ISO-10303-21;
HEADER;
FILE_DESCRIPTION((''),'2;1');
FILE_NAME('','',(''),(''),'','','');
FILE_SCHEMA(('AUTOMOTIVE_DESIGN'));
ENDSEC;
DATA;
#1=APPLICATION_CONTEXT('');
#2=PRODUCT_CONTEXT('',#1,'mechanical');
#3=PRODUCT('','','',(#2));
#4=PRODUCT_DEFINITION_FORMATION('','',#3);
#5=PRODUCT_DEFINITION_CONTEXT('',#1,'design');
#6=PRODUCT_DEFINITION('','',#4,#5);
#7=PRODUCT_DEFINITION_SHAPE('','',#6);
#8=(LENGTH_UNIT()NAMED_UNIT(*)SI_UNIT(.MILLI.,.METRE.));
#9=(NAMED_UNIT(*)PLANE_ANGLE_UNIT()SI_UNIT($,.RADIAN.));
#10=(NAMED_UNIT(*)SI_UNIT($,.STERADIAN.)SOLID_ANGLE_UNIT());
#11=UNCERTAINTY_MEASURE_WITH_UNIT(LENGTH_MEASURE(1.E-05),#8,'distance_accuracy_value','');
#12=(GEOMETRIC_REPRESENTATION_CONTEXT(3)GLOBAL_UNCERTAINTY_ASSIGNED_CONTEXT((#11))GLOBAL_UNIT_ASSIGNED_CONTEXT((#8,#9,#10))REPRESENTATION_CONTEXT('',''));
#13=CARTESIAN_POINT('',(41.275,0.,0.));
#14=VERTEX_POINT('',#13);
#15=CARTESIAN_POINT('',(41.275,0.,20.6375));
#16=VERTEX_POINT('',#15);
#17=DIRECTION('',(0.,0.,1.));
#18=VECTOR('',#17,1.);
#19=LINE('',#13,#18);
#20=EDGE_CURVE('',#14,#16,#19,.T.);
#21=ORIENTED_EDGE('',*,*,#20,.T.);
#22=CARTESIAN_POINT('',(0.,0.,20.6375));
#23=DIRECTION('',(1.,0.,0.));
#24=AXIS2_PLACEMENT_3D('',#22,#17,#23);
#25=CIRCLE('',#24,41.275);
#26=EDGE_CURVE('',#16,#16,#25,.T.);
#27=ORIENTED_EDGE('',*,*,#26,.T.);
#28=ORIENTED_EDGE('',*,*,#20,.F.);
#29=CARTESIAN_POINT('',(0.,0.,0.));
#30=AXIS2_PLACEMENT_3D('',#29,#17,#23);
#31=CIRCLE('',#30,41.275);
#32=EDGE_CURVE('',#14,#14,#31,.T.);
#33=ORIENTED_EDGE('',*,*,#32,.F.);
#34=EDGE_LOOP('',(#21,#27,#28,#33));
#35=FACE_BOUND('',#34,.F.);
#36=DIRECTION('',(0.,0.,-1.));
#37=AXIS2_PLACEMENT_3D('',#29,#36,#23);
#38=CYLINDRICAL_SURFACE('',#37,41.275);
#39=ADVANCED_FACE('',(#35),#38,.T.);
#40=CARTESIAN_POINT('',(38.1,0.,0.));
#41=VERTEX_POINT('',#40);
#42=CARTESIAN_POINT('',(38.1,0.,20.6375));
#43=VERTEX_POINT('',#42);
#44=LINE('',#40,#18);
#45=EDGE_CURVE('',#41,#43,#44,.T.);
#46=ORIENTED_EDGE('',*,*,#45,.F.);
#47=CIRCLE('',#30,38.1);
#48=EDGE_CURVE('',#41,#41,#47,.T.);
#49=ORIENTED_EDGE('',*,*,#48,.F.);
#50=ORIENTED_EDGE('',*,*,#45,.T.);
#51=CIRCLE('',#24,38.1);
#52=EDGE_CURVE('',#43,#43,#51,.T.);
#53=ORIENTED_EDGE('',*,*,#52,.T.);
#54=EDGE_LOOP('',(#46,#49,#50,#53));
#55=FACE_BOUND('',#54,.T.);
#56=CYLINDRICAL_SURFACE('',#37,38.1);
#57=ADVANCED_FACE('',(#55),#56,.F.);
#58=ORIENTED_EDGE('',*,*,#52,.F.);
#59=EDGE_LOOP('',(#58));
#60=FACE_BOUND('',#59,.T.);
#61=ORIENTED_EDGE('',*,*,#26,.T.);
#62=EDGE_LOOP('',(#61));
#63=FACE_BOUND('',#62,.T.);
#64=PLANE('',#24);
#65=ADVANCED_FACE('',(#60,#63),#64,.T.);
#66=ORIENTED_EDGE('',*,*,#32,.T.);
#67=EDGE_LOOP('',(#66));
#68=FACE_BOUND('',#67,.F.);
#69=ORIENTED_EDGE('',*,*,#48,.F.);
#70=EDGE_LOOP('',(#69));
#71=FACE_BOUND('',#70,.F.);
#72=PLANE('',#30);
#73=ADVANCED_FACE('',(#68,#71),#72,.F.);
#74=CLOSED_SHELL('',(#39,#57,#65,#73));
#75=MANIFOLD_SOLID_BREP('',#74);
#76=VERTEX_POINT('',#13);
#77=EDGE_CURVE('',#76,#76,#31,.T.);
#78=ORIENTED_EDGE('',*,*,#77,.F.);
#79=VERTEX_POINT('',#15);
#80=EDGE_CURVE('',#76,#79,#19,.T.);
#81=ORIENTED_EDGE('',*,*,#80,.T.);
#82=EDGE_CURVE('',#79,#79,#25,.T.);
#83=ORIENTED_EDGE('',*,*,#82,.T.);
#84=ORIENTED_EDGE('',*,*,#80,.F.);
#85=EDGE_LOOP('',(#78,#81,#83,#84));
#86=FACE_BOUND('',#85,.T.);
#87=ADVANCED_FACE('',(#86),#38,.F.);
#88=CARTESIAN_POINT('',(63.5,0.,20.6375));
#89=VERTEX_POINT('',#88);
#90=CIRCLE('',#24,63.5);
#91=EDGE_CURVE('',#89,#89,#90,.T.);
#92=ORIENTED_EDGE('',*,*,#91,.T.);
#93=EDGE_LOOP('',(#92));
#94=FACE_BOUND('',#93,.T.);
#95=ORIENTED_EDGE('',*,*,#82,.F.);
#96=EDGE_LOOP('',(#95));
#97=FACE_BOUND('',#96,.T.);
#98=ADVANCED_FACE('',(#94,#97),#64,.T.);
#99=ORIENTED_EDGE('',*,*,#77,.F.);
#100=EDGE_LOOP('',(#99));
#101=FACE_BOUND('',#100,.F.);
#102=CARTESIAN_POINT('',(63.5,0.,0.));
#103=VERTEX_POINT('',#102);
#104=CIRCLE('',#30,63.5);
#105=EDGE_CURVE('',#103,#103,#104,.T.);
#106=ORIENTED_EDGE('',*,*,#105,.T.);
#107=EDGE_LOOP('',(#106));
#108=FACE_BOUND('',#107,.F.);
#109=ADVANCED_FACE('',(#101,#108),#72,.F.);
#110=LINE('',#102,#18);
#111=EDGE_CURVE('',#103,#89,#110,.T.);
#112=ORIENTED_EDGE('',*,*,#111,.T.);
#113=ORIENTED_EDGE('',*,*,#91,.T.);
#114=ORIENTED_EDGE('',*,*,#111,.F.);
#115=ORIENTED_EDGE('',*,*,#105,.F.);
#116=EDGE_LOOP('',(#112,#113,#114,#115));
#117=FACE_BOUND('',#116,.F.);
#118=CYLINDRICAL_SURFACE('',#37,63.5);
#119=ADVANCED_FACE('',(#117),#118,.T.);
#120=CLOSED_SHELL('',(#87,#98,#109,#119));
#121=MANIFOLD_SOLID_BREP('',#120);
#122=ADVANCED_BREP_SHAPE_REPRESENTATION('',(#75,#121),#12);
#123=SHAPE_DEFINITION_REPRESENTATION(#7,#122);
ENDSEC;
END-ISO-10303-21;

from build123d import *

# Parameters (mm, degrees)
F0_R     = 41.275
F0_R_2   = 38.1
F1_DEPTH = 20.6375
F2_R     = 63.5
F2_R_2   = 41.275
F3_DEPTH = 20.6375


# Not quite as in the source:
# - a length typed as a fraction of an inch, garbled in the dataset ("3 / 203.2 mm" for 3/8 in), is restored


with BuildPart() as f1:
    # F0 (on Top) → F1 (new body)
    with BuildSketch(Plane.XY):
        Circle(F0_R)
        Circle(F0_R_2, mode=Mode.SUBTRACT)
    extrude(amount=F1_DEPTH)


with BuildPart() as f3:
    # F2 (on Top) → F3 (new body)
    with BuildSketch(Plane.XY):
        Circle(F2_R)
        Circle(F2_R_2, mode=Mode.SUBTRACT)
    extrude(amount=F3_DEPTH)


solid = Compound([f1.part, f3.part])
